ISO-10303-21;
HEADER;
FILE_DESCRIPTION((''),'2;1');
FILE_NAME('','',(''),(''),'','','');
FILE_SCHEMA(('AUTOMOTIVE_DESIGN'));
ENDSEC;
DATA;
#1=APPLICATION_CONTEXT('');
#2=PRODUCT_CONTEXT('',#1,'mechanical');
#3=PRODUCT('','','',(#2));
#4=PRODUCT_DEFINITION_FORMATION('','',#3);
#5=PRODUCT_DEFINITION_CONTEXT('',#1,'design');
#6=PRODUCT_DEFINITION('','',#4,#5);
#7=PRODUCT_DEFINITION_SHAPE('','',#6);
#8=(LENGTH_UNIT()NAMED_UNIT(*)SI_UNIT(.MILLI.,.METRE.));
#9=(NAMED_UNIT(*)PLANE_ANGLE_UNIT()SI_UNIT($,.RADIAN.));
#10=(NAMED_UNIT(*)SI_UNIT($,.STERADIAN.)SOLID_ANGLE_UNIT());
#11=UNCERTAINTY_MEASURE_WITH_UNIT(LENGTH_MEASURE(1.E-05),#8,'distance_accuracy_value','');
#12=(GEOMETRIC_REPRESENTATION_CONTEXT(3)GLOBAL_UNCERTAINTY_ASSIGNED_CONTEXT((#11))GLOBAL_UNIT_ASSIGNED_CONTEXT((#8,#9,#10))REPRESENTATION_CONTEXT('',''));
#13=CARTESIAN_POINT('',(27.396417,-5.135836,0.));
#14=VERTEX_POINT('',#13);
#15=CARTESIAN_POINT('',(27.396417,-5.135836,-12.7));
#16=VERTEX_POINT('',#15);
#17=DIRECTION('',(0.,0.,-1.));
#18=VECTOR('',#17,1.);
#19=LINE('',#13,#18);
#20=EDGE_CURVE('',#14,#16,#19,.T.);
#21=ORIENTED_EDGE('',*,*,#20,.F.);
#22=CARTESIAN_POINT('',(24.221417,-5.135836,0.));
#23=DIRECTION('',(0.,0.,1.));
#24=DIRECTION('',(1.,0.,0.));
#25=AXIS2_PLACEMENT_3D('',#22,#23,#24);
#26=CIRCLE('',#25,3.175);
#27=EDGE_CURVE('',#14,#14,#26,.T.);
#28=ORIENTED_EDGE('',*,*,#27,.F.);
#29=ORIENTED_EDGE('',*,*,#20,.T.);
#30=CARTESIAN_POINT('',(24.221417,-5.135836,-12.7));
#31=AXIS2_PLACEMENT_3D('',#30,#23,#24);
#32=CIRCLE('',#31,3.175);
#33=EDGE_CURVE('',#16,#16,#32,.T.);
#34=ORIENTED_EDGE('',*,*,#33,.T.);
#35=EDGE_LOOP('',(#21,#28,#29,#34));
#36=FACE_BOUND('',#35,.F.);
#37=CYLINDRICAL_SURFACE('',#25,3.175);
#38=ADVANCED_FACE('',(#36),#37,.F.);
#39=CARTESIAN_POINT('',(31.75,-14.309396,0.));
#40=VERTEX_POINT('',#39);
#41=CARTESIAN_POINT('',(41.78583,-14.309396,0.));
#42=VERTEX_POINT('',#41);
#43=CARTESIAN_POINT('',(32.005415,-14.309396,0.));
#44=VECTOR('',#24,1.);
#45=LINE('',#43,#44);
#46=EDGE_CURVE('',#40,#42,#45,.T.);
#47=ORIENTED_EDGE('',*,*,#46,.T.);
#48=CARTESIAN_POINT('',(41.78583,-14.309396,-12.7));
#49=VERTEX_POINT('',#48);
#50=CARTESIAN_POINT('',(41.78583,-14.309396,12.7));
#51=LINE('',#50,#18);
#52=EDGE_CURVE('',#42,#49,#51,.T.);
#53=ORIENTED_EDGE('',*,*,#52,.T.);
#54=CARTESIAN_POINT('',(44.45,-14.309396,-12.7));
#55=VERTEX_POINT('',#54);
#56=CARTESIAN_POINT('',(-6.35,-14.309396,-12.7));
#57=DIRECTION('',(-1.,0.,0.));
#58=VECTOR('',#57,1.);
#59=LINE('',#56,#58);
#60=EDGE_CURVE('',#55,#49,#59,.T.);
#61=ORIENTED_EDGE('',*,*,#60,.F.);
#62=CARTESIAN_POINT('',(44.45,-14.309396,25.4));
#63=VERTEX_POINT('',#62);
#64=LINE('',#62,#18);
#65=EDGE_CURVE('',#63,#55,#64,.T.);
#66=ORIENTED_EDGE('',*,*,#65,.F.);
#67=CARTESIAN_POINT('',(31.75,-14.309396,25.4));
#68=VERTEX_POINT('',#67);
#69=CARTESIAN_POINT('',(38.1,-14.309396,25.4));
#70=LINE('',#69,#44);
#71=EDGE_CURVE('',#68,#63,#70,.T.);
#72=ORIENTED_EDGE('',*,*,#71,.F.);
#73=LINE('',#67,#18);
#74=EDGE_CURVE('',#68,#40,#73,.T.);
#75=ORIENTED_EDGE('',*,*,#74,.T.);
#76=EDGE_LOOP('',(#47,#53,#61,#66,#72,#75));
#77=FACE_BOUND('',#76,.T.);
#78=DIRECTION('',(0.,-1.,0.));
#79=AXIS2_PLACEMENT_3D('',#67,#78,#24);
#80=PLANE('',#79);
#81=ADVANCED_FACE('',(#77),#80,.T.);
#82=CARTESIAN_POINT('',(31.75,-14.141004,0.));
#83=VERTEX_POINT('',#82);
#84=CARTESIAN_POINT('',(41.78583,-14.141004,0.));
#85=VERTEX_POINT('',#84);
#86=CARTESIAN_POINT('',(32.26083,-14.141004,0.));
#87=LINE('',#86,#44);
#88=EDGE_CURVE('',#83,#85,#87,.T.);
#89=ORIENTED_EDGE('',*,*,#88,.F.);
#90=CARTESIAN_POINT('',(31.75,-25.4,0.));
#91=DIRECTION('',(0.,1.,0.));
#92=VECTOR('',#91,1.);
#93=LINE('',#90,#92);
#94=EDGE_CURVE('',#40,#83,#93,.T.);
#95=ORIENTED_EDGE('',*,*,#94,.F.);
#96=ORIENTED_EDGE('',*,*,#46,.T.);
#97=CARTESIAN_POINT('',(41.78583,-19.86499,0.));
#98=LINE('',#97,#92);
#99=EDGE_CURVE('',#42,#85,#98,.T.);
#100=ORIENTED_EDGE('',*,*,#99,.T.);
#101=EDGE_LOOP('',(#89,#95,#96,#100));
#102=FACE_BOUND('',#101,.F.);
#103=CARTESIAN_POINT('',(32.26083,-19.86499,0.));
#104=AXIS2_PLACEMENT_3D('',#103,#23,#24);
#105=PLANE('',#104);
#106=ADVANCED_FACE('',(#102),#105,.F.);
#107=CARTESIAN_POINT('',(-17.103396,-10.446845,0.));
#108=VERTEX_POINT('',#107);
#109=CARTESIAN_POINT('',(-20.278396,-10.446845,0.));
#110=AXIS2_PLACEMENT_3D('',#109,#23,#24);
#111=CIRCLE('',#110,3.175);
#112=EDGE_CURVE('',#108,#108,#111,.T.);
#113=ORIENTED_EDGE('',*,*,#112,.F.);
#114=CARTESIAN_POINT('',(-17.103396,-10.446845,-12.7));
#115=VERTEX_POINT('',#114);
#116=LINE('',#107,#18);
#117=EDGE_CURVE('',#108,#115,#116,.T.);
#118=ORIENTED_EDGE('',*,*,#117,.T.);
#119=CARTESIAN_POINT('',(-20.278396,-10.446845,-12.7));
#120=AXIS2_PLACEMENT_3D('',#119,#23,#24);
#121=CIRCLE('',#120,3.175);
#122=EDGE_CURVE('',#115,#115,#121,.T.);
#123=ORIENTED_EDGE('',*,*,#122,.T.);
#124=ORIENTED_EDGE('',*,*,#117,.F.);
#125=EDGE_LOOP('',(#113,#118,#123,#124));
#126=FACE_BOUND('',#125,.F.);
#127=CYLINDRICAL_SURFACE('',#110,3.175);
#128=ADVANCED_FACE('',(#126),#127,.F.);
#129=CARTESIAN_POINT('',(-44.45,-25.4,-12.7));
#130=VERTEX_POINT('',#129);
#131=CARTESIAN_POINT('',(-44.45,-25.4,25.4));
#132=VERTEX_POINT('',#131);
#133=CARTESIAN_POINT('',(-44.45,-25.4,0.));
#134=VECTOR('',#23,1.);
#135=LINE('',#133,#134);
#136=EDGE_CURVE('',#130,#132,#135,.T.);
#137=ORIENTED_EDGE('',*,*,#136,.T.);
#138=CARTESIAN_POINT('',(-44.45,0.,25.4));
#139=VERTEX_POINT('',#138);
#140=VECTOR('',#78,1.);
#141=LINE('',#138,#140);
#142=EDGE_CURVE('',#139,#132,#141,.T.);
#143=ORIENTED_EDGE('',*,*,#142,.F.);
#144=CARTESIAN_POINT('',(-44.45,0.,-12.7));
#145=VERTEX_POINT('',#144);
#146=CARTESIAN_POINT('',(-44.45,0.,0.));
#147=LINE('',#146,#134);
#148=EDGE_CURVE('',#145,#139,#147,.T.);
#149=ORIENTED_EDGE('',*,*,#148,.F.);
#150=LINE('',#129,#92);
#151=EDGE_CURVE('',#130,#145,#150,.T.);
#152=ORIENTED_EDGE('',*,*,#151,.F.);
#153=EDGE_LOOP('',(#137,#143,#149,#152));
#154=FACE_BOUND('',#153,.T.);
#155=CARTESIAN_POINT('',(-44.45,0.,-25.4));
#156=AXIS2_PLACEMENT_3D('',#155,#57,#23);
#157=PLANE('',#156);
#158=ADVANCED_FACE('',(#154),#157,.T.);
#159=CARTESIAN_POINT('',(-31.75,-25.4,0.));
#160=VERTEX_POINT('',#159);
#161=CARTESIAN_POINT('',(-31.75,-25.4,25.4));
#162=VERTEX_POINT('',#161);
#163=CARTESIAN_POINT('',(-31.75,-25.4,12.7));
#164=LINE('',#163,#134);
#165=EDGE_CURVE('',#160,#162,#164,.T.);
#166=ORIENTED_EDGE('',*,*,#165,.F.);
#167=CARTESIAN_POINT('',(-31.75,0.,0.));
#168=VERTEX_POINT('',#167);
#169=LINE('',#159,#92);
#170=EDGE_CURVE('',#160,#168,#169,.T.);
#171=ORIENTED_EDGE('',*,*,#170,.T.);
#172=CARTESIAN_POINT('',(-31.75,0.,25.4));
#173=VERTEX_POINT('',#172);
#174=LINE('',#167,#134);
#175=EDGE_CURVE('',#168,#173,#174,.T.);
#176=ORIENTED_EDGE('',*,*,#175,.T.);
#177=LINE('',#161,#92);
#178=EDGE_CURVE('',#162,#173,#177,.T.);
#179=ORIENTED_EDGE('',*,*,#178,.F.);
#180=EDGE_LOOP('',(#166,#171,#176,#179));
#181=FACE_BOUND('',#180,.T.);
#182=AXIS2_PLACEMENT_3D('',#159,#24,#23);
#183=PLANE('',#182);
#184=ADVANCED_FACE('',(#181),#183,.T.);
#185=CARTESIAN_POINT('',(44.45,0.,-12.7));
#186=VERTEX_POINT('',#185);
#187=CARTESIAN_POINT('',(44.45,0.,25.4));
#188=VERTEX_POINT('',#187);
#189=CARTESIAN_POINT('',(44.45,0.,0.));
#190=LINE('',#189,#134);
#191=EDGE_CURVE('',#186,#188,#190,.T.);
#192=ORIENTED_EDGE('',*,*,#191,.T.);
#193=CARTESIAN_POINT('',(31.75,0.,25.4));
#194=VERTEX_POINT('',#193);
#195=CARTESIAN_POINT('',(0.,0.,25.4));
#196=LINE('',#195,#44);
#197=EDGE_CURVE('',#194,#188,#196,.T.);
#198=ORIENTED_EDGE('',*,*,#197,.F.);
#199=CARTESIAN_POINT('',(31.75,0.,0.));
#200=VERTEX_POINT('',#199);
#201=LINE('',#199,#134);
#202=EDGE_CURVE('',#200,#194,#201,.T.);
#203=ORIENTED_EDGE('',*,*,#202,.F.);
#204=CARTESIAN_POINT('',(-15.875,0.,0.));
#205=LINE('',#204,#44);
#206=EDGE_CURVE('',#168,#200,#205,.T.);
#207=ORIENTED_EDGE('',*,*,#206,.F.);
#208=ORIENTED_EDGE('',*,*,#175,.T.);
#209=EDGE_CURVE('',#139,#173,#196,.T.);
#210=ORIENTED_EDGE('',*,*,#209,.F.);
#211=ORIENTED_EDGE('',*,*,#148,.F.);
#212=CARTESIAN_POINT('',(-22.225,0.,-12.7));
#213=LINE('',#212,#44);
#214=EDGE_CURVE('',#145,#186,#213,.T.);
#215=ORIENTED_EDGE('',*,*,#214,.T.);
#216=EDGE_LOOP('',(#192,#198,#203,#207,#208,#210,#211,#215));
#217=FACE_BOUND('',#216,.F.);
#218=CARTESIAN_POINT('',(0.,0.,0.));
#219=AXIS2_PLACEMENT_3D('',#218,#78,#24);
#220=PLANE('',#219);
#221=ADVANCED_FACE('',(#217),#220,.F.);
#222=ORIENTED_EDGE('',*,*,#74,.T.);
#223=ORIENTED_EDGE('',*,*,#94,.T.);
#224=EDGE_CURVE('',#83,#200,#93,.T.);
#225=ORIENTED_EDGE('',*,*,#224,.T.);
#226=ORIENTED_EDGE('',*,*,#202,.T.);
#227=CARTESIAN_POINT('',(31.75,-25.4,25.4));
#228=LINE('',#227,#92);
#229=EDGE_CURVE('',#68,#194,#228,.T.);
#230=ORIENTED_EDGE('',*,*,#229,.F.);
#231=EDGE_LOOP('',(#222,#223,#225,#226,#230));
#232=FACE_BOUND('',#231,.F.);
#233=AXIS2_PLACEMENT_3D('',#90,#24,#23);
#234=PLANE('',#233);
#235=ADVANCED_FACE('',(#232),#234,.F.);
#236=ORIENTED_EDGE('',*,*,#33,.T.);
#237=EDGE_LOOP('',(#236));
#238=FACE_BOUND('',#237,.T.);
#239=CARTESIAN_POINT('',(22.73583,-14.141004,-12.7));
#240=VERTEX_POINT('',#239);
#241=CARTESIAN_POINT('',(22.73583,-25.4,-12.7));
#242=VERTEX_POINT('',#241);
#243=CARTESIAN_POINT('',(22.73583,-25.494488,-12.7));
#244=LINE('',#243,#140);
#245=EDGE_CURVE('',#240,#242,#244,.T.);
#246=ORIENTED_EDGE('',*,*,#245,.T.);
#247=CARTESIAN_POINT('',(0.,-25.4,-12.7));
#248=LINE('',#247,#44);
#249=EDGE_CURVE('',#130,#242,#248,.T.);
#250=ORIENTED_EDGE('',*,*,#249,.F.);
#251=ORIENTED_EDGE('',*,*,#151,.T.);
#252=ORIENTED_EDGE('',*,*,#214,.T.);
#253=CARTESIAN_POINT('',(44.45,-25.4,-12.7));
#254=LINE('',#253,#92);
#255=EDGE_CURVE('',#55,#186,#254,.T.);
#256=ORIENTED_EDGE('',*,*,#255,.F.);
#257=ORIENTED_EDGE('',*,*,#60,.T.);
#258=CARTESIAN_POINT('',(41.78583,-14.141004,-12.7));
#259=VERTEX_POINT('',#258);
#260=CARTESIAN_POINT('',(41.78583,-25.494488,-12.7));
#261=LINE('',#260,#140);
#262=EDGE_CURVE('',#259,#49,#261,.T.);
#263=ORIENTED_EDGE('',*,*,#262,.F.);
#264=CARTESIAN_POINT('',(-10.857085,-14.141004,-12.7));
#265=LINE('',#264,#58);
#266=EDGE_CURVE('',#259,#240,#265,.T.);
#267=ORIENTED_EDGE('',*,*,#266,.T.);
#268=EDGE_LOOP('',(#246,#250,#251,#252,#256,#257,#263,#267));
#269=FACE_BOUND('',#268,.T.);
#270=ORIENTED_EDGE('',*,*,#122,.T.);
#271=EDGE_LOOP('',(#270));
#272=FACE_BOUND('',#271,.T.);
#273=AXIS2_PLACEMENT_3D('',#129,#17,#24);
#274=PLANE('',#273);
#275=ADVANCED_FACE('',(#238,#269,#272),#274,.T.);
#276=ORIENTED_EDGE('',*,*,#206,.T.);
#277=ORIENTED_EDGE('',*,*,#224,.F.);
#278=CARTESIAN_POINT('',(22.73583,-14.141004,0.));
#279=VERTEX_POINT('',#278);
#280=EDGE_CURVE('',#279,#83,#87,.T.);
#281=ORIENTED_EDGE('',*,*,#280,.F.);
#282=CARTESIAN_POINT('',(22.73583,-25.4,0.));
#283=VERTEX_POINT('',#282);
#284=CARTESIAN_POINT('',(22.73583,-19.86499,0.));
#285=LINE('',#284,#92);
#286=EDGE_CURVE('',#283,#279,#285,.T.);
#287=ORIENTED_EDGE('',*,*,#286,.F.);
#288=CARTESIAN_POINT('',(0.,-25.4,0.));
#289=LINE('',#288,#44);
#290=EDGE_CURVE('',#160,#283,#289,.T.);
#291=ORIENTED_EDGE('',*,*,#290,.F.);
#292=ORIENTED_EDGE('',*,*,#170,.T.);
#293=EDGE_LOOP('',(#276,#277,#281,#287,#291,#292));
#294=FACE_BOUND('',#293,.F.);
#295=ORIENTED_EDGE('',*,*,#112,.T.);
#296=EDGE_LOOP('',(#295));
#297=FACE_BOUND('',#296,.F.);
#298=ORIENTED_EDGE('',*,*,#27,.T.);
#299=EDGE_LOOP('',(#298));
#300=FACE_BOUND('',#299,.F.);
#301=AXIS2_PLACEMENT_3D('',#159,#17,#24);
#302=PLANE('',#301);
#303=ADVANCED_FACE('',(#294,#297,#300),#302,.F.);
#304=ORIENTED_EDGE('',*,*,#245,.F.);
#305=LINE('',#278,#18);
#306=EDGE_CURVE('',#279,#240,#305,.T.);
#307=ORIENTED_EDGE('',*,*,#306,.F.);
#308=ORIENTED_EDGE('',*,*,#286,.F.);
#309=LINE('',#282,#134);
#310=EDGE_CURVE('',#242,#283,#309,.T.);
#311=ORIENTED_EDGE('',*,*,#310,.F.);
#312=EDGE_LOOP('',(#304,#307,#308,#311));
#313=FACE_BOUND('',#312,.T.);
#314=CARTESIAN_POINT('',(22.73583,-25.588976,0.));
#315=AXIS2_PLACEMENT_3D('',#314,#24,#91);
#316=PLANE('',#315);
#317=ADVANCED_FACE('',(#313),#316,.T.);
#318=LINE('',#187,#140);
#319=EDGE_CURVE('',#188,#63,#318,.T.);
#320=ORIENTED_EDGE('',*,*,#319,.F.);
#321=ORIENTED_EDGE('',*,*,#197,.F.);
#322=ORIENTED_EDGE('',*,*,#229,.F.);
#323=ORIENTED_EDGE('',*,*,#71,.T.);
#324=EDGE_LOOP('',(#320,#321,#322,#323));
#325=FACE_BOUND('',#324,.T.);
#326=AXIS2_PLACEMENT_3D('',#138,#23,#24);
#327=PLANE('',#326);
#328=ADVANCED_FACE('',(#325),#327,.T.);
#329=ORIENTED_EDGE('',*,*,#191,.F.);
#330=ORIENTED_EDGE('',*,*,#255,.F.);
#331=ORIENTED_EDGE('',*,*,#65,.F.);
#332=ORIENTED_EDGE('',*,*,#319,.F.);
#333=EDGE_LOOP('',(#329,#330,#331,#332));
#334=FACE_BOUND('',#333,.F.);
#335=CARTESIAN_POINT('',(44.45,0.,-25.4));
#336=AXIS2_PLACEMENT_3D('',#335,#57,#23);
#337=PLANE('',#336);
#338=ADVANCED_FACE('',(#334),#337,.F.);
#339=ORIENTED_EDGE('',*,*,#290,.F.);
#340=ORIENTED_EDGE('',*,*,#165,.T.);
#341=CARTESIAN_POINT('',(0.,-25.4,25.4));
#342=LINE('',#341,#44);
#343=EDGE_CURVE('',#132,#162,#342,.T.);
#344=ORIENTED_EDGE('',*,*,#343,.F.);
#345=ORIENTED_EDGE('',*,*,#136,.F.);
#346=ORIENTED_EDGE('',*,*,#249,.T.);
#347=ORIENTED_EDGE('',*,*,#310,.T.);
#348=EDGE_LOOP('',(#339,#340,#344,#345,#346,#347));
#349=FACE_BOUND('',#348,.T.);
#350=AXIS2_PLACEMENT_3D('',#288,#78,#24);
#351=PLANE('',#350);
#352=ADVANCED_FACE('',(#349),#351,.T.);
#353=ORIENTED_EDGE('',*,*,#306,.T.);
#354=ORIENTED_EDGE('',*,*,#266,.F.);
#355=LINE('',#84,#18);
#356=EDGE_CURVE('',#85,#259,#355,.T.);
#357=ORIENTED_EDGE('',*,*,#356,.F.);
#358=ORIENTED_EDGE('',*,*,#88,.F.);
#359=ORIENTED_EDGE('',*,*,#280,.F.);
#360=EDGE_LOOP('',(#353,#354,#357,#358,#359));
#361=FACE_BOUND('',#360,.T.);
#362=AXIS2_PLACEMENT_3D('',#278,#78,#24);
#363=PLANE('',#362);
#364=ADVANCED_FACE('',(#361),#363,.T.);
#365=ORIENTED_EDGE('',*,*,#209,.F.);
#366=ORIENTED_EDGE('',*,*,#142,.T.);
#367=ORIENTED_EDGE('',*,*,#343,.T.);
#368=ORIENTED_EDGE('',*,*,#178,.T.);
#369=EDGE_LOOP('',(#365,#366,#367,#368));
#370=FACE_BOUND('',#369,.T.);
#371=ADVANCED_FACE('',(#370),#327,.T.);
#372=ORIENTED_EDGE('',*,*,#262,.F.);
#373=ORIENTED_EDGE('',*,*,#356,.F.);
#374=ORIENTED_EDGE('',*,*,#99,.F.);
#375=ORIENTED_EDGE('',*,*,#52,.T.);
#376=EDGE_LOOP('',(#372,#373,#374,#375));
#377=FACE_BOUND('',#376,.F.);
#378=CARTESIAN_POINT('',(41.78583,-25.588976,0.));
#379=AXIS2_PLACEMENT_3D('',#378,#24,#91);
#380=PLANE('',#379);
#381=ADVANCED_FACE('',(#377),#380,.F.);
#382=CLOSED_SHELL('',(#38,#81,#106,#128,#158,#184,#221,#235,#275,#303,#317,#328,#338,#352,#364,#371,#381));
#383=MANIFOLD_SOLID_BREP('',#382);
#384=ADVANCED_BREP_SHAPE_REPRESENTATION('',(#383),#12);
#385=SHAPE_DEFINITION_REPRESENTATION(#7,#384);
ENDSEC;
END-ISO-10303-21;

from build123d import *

# Parameters (mm, degrees)
F0_W      = 88.9
F0_H      = 50.8
F1_DEPTH  = 25.4
F2_W      = 63.5
F2_H      = 25.4
F3_DEPTH  = 25.401
F4_W      = 88.9
F4_H      = 12.7
F5_DEPTH  = 25.401
F8_W      = 19.05
F8_H      = 11.447972618
F9_DEPTH  = 12.701
F10_W     = 12.7
F10_H     = 11.090603964
F11_DEPTH = 38.101
F12_R     = 3.175
F14_DEPTH = 12.701
F13_R     = 3.175
F15_DEPTH = 12.701


# Not quite as in the source:
# - a feature of the source that left no trace in its solid (it failed there, or was rolled back) is left out


with BuildPart() as f1:
    # F0 (on Front) → F1 (new body)
    with BuildSketch(Plane.XZ):
        Rectangle(F0_W, F0_H)
    extrude(amount=F1_DEPTH)

    # F2 (on face) → F3 (cut, through all)
    with BuildSketch(Plane.XZ.offset(25.4)):
        with Locations((0, 12.7)):
            Rectangle(F2_W, F2_H)
    extrude(amount=-F3_DEPTH, mode=Mode.SUBTRACT)

    # F4 (on face) → F5 (cut, through all)
    with BuildSketch(Plane.XZ.offset(25.4)):
        with Locations((0, -19.05)):
            Rectangle(F4_W, F4_H)
    extrude(amount=-F5_DEPTH, mode=Mode.SUBTRACT)

    # F8 (on face) → F9 (cut, through all)
    with BuildSketch(Plane.XY):
        with Locations((32.2608303964, -19.8649899103)):
            Rectangle(F8_W, F8_H)
    extrude(amount=-F9_DEPTH, mode=Mode.SUBTRACT)

    # F10 (on face) → F11 (cut, through all)
    with BuildSketch(Plane.XY.offset(25.4)):
        with Locations((38.1, -19.854698018)):
            Rectangle(F10_W, F10_H)
    extrude(amount=-F11_DEPTH, mode=Mode.SUBTRACT)

    # F12 (on face) → F14 (cut, through all)
    with BuildSketch(Plane.XY):
        with Locations((24.2214165628, -5.1358360797)):
            Circle(F12_R)
    extrude(amount=-F14_DEPTH, mode=Mode.SUBTRACT)

    # F13 (on face) → F15 (cut, through all)
    with BuildSketch(Plane.XY):
        with Locations((-20.2783960849, -10.4468446225)):
            Circle(F13_R)
    extrude(amount=-F15_DEPTH, mode=Mode.SUBTRACT)


solid = f1.part
